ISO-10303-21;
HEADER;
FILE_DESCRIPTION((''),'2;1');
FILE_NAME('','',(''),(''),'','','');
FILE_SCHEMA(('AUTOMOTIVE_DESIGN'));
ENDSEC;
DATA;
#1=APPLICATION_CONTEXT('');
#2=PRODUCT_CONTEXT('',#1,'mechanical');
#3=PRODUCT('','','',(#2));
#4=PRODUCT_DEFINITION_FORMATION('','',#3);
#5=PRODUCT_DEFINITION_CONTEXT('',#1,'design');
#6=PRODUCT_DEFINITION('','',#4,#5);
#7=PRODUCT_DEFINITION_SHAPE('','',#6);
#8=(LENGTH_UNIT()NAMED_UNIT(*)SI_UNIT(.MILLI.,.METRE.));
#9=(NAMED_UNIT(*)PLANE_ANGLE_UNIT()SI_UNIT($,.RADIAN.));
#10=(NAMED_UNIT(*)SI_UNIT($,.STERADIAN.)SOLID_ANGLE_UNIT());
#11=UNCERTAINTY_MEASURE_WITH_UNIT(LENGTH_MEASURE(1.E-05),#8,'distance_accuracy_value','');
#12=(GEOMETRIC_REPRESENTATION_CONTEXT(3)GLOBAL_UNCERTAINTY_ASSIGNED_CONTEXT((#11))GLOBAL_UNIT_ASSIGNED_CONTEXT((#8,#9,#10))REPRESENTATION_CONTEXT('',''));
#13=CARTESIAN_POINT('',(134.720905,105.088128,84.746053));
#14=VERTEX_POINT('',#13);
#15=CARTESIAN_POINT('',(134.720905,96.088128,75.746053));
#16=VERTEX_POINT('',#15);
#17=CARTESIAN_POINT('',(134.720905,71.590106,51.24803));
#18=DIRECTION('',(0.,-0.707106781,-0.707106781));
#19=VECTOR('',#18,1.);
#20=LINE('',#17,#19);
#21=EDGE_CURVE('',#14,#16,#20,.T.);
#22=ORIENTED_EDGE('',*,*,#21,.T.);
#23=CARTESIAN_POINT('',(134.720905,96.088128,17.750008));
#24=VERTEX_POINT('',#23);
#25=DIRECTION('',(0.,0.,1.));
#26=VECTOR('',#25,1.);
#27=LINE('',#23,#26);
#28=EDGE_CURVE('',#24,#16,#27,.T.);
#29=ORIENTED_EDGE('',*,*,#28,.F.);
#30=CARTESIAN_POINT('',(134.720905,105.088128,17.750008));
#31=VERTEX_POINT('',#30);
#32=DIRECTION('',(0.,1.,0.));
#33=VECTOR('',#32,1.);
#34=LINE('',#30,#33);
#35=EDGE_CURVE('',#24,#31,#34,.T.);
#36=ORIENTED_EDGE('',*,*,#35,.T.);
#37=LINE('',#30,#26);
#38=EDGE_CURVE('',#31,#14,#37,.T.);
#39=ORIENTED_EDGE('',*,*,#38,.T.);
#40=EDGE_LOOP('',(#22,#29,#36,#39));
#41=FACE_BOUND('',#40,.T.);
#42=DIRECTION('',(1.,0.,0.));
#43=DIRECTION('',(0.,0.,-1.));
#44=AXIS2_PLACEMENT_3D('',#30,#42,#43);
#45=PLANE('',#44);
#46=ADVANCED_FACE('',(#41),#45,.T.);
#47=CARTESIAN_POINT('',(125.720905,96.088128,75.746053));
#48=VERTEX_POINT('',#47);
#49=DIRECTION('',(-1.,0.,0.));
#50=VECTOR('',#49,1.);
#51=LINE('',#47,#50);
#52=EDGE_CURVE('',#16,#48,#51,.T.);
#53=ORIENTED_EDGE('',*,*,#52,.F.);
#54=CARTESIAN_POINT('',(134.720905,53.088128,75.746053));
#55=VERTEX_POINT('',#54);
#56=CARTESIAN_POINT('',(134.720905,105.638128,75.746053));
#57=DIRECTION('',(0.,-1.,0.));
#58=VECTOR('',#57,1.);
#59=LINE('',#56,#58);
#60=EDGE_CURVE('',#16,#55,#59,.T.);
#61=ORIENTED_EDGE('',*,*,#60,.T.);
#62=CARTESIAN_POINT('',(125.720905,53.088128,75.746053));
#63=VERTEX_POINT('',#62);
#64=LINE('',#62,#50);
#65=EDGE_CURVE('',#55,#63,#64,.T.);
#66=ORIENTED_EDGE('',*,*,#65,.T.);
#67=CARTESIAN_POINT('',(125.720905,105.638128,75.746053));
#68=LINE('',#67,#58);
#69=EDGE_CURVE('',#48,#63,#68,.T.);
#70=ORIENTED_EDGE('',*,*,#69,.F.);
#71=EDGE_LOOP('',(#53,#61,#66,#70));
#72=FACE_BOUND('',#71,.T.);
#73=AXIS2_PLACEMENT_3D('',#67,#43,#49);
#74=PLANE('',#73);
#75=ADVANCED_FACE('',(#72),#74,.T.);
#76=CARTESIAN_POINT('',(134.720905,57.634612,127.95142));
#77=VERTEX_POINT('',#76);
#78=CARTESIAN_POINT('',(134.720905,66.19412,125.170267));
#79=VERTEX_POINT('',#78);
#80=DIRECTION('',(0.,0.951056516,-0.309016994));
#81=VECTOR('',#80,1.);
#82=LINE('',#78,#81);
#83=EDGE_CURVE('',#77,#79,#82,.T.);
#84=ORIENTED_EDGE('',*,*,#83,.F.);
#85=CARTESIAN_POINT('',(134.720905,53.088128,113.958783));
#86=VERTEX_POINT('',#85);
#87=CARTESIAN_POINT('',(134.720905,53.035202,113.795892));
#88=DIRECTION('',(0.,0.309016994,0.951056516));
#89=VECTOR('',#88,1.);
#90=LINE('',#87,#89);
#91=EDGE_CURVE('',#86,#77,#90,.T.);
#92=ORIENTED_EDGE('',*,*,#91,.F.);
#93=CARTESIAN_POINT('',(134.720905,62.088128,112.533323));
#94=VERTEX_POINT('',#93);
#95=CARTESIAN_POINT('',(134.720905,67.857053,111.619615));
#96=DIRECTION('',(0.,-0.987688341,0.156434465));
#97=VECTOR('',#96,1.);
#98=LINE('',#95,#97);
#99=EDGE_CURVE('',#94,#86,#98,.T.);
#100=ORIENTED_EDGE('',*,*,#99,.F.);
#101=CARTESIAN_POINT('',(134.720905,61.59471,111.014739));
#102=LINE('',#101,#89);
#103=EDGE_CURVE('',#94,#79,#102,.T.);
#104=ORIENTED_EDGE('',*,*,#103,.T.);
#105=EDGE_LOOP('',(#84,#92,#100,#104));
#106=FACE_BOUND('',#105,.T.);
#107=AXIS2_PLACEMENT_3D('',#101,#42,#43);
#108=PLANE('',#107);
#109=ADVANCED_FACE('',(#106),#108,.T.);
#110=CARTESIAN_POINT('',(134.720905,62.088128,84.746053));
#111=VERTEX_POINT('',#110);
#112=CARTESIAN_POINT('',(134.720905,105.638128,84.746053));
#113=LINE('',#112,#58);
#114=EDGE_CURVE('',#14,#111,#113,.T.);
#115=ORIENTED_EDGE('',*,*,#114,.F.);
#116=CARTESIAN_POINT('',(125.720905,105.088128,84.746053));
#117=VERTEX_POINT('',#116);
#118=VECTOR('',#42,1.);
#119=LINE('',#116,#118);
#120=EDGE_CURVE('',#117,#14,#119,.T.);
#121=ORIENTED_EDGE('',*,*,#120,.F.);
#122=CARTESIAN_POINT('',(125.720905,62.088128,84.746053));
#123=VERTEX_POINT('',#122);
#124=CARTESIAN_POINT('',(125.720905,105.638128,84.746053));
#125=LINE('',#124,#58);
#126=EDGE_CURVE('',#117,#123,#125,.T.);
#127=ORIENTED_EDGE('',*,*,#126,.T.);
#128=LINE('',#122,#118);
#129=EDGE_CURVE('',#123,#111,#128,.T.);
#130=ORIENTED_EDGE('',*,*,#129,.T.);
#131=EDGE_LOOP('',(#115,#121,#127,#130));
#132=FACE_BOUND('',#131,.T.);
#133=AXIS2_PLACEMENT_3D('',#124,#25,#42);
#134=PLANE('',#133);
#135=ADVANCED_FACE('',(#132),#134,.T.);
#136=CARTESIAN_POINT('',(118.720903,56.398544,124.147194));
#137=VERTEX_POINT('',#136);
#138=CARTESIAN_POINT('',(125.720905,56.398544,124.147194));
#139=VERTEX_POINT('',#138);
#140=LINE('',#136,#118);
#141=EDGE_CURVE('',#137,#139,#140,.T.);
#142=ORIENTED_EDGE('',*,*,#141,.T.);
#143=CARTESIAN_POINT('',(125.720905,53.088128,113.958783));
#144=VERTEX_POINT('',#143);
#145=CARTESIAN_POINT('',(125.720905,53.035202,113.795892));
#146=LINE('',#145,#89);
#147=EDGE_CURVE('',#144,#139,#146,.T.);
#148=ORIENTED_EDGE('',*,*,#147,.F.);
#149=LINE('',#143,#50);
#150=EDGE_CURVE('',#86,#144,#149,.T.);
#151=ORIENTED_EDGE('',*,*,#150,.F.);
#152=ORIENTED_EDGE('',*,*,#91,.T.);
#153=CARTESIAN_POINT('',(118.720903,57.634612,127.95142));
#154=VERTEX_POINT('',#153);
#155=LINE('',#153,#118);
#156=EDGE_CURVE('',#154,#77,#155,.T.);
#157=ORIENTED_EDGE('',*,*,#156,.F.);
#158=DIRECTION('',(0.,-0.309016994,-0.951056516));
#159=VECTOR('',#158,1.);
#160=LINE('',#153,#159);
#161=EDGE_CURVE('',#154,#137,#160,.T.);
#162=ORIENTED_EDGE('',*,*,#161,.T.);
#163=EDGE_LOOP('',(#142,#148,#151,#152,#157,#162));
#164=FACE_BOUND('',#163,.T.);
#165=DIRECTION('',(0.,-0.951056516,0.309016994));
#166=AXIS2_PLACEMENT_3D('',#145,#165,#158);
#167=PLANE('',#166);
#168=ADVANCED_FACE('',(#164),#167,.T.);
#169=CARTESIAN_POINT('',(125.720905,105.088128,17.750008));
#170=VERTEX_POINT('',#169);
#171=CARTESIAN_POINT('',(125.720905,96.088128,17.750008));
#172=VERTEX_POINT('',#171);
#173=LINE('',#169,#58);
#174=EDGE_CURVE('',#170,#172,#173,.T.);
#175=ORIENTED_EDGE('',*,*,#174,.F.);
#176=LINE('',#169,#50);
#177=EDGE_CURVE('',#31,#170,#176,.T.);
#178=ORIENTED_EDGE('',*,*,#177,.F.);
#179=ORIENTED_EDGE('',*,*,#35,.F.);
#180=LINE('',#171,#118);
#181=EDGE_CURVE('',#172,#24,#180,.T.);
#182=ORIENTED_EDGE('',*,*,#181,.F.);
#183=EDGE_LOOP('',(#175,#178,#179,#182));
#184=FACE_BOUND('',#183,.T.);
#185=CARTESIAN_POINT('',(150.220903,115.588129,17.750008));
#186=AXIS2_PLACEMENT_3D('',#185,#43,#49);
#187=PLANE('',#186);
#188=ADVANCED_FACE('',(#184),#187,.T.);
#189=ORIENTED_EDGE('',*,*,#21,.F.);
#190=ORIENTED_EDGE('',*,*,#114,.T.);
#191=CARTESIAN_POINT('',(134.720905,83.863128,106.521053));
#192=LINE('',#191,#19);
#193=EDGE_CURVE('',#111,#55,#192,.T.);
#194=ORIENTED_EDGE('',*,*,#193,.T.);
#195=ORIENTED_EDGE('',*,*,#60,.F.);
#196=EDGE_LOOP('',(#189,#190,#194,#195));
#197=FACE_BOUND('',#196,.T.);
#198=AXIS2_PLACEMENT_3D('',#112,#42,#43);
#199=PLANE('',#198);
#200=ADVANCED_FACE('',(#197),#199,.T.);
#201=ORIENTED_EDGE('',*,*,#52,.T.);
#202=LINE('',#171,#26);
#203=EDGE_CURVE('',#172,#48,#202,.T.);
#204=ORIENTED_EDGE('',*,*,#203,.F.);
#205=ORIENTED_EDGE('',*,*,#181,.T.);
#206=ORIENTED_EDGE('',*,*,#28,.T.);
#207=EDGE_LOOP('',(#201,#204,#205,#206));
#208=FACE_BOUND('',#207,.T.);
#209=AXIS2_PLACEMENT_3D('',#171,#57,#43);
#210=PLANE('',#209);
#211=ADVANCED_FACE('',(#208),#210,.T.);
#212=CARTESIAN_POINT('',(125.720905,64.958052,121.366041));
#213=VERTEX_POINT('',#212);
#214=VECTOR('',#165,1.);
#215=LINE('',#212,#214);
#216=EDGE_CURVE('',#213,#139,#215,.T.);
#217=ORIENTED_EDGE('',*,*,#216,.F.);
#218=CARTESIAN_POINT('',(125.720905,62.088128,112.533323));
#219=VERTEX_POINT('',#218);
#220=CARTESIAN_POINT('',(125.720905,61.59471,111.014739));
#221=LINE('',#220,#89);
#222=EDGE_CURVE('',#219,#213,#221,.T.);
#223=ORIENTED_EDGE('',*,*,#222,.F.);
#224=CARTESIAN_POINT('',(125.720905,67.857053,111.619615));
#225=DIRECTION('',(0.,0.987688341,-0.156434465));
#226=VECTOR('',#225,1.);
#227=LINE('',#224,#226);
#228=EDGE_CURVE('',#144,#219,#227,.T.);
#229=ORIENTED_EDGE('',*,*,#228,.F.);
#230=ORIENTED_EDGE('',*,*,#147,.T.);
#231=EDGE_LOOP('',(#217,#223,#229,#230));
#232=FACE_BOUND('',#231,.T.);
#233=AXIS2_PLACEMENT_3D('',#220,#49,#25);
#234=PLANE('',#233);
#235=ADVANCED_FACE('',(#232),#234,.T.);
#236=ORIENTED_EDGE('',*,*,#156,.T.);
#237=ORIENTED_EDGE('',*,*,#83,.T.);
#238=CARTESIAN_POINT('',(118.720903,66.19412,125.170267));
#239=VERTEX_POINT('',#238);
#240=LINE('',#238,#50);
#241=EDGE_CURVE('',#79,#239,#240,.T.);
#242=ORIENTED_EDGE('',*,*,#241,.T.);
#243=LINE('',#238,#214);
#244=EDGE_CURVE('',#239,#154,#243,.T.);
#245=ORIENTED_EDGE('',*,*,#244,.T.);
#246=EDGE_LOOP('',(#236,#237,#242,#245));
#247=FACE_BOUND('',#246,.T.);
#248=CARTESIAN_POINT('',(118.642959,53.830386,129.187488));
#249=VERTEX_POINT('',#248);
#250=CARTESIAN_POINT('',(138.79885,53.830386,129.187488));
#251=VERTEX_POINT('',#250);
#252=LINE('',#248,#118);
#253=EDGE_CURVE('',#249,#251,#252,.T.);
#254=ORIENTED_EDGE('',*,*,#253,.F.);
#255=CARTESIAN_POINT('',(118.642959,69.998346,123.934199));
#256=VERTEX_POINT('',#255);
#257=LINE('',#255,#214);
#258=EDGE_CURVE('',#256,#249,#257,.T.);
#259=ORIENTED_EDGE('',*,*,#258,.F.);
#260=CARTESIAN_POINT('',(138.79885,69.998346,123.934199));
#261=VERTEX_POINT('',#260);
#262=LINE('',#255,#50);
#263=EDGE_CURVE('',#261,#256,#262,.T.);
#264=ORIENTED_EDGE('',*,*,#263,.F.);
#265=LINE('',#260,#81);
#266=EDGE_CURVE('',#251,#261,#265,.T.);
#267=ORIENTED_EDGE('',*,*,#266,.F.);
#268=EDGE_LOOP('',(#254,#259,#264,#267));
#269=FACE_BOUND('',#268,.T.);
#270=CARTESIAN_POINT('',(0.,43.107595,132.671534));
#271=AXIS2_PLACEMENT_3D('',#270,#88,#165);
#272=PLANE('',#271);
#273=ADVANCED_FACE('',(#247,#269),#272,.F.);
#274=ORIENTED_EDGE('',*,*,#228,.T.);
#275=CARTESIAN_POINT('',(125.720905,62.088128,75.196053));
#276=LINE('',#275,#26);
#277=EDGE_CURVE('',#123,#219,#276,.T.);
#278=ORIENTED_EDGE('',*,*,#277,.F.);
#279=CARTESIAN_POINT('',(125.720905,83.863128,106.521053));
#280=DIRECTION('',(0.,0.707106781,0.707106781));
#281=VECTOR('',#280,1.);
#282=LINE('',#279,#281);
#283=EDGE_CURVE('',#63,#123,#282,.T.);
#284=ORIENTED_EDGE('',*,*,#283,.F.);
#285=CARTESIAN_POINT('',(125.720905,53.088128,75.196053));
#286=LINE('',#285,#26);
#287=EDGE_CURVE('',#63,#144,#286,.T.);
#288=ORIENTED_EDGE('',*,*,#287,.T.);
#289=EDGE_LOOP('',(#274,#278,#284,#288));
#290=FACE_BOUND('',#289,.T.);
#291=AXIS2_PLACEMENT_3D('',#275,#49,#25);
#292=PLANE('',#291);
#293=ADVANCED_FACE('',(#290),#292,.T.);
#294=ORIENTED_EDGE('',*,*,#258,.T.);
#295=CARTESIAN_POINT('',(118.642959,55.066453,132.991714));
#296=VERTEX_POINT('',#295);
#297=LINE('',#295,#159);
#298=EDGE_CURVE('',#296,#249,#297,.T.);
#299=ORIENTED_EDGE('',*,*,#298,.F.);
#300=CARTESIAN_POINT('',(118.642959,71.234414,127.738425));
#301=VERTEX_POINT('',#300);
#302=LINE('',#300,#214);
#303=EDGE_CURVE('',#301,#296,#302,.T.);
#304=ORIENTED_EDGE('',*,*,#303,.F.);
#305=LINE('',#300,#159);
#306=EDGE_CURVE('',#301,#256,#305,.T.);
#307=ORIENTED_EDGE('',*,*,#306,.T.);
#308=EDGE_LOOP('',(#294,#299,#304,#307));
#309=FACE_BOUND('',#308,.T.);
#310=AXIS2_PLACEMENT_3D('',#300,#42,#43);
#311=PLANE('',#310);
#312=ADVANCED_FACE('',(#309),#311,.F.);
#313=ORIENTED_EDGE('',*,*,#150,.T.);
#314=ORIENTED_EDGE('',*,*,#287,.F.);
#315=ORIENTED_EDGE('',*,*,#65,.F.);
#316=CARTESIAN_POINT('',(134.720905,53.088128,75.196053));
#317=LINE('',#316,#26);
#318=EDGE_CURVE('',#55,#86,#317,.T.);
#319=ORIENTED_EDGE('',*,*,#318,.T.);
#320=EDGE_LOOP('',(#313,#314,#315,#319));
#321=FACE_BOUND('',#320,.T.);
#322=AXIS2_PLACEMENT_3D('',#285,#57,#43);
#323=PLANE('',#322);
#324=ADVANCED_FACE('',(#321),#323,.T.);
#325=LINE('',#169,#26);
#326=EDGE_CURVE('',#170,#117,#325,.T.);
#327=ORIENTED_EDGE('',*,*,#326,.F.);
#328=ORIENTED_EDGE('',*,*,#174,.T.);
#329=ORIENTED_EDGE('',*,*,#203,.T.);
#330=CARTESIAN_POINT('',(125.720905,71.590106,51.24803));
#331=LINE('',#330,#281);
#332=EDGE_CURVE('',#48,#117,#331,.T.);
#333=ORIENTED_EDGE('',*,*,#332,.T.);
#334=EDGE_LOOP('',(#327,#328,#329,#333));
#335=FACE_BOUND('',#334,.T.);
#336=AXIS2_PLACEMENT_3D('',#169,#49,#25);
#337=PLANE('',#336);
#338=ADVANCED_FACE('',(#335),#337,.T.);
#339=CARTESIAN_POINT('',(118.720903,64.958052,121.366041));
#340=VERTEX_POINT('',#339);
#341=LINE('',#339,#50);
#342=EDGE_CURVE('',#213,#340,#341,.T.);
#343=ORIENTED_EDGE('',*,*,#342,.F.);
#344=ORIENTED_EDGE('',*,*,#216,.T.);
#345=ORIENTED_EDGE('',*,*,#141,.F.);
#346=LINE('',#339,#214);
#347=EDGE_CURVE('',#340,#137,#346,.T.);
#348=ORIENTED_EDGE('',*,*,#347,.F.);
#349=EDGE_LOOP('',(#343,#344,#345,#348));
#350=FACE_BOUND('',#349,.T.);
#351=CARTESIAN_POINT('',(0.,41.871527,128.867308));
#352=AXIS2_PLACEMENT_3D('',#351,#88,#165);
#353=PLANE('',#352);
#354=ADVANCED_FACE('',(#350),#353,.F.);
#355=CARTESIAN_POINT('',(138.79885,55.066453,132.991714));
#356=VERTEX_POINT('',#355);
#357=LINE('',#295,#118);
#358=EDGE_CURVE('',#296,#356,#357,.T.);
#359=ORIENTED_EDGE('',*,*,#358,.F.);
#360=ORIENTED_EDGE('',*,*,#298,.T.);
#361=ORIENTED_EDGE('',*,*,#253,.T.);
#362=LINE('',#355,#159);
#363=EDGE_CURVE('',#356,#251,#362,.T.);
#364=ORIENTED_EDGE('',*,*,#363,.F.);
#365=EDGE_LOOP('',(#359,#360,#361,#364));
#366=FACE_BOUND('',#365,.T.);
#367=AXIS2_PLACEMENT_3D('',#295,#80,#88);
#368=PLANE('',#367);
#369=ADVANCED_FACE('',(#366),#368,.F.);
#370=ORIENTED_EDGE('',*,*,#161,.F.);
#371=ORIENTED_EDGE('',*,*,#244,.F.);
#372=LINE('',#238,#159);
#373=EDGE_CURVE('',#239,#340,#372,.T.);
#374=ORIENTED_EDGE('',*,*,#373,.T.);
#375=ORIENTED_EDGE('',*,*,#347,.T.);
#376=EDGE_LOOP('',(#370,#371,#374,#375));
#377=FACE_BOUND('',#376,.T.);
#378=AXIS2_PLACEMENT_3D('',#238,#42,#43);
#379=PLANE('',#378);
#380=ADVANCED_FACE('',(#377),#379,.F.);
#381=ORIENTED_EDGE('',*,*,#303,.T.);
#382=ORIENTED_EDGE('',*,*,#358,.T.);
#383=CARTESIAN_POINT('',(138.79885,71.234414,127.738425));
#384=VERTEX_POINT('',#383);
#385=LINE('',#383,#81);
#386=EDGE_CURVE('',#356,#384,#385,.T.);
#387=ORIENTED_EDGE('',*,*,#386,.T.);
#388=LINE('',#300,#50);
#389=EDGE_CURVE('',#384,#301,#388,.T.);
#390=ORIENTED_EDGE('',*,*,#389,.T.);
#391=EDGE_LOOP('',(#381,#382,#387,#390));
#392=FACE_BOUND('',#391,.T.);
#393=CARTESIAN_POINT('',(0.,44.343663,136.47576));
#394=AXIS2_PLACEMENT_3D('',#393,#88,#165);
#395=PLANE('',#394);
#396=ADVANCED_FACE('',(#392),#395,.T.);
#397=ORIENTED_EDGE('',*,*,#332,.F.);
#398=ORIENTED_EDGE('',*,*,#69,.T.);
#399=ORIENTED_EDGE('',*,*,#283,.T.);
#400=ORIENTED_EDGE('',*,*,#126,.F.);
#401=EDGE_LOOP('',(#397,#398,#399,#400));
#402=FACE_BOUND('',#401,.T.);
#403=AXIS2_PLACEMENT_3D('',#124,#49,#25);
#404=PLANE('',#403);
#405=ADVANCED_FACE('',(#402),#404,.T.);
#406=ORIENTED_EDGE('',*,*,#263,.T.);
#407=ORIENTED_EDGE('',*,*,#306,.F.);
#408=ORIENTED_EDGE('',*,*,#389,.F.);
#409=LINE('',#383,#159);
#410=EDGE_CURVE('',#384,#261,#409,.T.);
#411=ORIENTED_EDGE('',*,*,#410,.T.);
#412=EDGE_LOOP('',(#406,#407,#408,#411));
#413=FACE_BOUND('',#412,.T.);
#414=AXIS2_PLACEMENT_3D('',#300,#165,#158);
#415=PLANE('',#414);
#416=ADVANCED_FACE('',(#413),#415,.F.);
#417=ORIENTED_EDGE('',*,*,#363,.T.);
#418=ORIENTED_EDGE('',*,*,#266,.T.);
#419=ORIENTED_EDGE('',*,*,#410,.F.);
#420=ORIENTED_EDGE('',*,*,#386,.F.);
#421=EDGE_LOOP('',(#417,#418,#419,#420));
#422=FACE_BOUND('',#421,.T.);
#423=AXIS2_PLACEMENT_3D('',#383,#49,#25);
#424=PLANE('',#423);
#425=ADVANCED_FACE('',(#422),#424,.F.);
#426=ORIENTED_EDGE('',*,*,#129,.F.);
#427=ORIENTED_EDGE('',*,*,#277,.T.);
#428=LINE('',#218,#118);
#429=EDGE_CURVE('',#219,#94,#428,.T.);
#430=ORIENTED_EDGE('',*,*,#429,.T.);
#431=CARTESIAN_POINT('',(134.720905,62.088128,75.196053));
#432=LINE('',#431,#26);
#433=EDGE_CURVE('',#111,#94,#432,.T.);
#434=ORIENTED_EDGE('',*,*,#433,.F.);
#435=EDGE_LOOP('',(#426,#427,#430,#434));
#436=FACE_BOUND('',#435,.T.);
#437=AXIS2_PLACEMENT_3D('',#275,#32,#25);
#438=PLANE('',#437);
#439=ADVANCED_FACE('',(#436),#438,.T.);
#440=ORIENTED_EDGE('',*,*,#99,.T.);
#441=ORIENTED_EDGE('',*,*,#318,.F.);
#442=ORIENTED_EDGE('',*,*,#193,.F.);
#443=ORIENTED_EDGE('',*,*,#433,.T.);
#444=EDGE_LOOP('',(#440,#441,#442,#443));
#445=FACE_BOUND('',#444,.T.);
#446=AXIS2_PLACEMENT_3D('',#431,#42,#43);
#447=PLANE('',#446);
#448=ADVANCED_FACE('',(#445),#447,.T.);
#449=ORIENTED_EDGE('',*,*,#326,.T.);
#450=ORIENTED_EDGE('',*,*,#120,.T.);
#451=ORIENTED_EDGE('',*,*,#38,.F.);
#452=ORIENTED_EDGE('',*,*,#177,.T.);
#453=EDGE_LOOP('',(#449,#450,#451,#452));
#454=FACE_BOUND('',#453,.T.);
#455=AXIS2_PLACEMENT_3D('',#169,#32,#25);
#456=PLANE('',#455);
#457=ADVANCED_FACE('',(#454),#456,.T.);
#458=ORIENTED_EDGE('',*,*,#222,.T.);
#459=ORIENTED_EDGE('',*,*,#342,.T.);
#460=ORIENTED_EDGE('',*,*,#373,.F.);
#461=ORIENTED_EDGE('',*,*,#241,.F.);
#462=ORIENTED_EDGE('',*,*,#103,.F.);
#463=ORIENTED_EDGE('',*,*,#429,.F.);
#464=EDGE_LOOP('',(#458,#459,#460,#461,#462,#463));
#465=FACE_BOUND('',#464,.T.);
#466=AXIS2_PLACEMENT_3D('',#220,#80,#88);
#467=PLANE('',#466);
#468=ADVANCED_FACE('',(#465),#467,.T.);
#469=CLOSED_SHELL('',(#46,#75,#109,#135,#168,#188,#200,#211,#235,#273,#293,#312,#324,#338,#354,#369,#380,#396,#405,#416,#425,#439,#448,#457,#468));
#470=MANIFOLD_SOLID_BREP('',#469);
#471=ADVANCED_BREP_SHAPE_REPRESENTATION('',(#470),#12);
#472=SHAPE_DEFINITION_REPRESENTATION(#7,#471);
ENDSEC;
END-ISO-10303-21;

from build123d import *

# Parameters (mm, degrees)
CUT_EXTRUDE3_START         = -17.750008032
CUT_EXTRUDE3_OUTLINE_W     = 3.00000608
CUT_EXTRUDE3_OUTLINE_H     = 30.000001192
CUT_EXTRUDE3_OUTLINE_W_2   = 2.999998629
CUT_EXTRUDE3_DEPTH         = 17.750008032
CUT_EXTRUDE3_2_OUTLINE_W   = 9.999990463
CUT_EXTRUDE3_2_OUTLINE_H   = 30.000001192
CUT_EXTRUDE3_2_OUTLINE_W_2 = 10.000005364
CUT_EXTRUDE3_2_DEPTH       = 3.000000026
CUT_EXTRUDE3_START_2       = -3.000000492
CUT_EXTRUDE3_3_OUTLINE_W   = 12.49999553
CUT_EXTRUDE3_3_OUTLINE_H   = 30.000001192
CUT_EXTRUDE3_3_DEPTH       = 3.000000492
CUT_EXTRUDE3_START_3       = 85.588127375
CUT_EXTRUDE3_4_DEPTH       = 30.000001192
SKETCH7_W                  = 9
SKETCH7_H                  = 9
SKETCH11_W                 = 16.000001486
SKETCH11_H                 = 9
BOSS_EXTRUDE5_DEPTH        = 4
SKETCH12_W                 = 20.155891034
SKETCH12_H                 = 17
BOSS_EXTRUDE6_DEPTH        = 4
CUT_EXTRUDE4_DEPTH         = 20
CUT_EXTRUDE4_DEPTH_BACK    = 20
SKETCH13_W                 = 17.750008032
SKETCH13_H                 = 30.000001192


with BuildPart() as part:
    # Cut-Extrude3: read off the stored shape, not the designer's step
    # Cut-Extrude3 outline → Cut-Extrude3 (new body)
    with BuildSketch(Plane.XY.offset(17.750008032).offset(CUT_EXTRUDE3_START)):
        with Locations((137.970902026, 100.588127971)):
            Rectangle(CUT_EXTRUDE3_OUTLINE_W, CUT_EXTRUDE3_OUTLINE_H)
        with Locations((122.470904142, 100.588127971)):
            Rectangle(CUT_EXTRUDE3_OUTLINE_W_2, CUT_EXTRUDE3_OUTLINE_H)
    extrude(amount=CUT_EXTRUDE3_DEPTH)

    # Cut-Extrude3 2 outline → Cut-Extrude3 2 (add)
    # profile 1 of 2: a face of its own
    with BuildSketch(Plane.XY.offset(17.750008032).offset(CUT_EXTRUDE3_START)):
        with Locations((144.470900298, 100.588127971)):
            Rectangle(CUT_EXTRUDE3_2_OUTLINE_W, CUT_EXTRUDE3_2_OUTLINE_H)
        Polygon((146.020904183, 100.58812052), (145.813241601, 99.813126028), (145.24589479, 99.245779216), (144.470900297, 99.038124084), (143.695905805, 99.245779216), (143.128573895, 99.813126028), (142.920896411, 100.58812052), (143.128573895, 101.363122463), (143.695905805, 101.930469275), (144.470900297, 102.138124406), (145.24589479, 101.930469275), (145.813241601, 101.363122463), align=None, mode=Mode.SUBTRACT)
    # profile 2 of 2: a face of its own
    with BuildSketch(Plane.XY.offset(17.750008032).offset(CUT_EXTRUDE3_START)):
        with Locations((115.970902145, 100.588127971)):
            Rectangle(CUT_EXTRUDE3_2_OUTLINE_W_2, CUT_EXTRUDE3_2_OUTLINE_H)
        Polygon((114.628560841, 101.363122463), (115.195907652, 101.930469275), (115.970902145, 102.138124406), (116.745904088, 101.930469275), (117.313250899, 101.363122463), (117.520906031, 100.58812052), (117.313250899, 99.813126028), (116.745904088, 99.245779216), (115.970902145, 99.038124084), (115.195907652, 99.245779216), (114.628560841, 99.813126028), (114.420905709, 100.58812052), align=None, mode=Mode.SUBTRACT)
    extrude(amount=CUT_EXTRUDE3_2_DEPTH)

    # Cut-Extrude3 3 outline → Cut-Extrude3 3 (add)
    with BuildSketch(Plane.XY.offset(17.750008032).offset(CUT_EXTRUDE3_START_2)):
        with Locations((130.220901221, 100.588127971)):
            Rectangle(CUT_EXTRUDE3_3_OUTLINE_W, CUT_EXTRUDE3_3_OUTLINE_H)
    extrude(amount=CUT_EXTRUDE3_3_DEPTH)

    # Cut-Extrude3 4 outline → Cut-Extrude3 4 (add)
    with BuildSketch(Plane(origin=(0, 0, 0), x_dir=(1, 0, 0), z_dir=(0, 1, 0)).offset(CUT_EXTRUDE3_START_3)):
        Polygon((139.738842845, -4.00000019), (140.470907092, -3.267952008), (141.470894217, -3.000000026), (139.470905066, -3.000000026), (139.470905066, -5.000007804), align=None)
        Polygon((118.970900774, -3.000000026), (119.970902801, -3.267952008), (120.702959597, -4.00000019), (120.970904827, -5.000007804), (120.970904827, -3.000000026), align=None)
    extrude(amount=CUT_EXTRUDE3_4_DEPTH)

    # Sweep1: sweep along a path in Sketch5
    with BuildLine(Plane(origin=(130.220903456, 0, 0), x_dir=(0, 0, -1), z_dir=(1, 0, 0))) as sweep1_path:
        Line((-17.750008032, 100.588127971), (-80.246052562, 100.588127971))
        Line((-80.246052562, 100.588127971), (-80.246052562, 57.588127971))
        Line((-80.246052562, 57.588127971), (-113.246052562, 57.588127971))
        Line((-113.246052562, 57.588127971), (-122.756617725, 60.678297914))
    # Sketch7 → Sweep1 (sweep)
    with BuildSketch(Plane.XY.offset(17.750008032)):
        with Locations((130.220904946, 100.588127971)):
            Rectangle(SKETCH7_W, SKETCH7_H)
    sweep(path=sweep1_path.line, transition=Transition.RIGHT)

    # Sketch11 → Boss-Extrude5 (add)
    with BuildSketch(Plane(origin=(0, 41.871526616, 128.867308142), x_dir=(1, 0, 0), z_dir=(0, 0.30901699437494257, 0.9510565162951552))):
        with Locations((126.720904203, 19.77460958)):
            Rectangle(SKETCH11_W, SKETCH11_H)
    extrude(amount=BOSS_EXTRUDE5_DEPTH)

    # Sketch12 → Boss-Extrude6 (add)
    with BuildSketch(Plane(origin=(0, 43.107594593, 132.671534207), x_dir=(1, 0, 0), z_dir=(0, 0.3090169943749432, 0.951056516295155))):
        with Locations((128.72090495, 19.77460958)):
            Rectangle(SKETCH12_W, SKETCH12_H)
    extrude(amount=BOSS_EXTRUDE6_DEPTH)

    # Sketch13 → Cut-Extrude4 (cut, two sides: drawn at the far end of the back side and taken through both)
    with BuildSketch(Plane(origin=(130.220903456, 0, 0), x_dir=(0, 0, -1), z_dir=(1, 0, 0)).offset(-CUT_EXTRUDE4_DEPTH_BACK)):
        with Locations((-8.875004016, 100.588127971)):
            Rectangle(SKETCH13_W, SKETCH13_H)
    extrude(amount=CUT_EXTRUDE4_DEPTH + CUT_EXTRUDE4_DEPTH_BACK, mode=Mode.SUBTRACT)


solid = part.part
